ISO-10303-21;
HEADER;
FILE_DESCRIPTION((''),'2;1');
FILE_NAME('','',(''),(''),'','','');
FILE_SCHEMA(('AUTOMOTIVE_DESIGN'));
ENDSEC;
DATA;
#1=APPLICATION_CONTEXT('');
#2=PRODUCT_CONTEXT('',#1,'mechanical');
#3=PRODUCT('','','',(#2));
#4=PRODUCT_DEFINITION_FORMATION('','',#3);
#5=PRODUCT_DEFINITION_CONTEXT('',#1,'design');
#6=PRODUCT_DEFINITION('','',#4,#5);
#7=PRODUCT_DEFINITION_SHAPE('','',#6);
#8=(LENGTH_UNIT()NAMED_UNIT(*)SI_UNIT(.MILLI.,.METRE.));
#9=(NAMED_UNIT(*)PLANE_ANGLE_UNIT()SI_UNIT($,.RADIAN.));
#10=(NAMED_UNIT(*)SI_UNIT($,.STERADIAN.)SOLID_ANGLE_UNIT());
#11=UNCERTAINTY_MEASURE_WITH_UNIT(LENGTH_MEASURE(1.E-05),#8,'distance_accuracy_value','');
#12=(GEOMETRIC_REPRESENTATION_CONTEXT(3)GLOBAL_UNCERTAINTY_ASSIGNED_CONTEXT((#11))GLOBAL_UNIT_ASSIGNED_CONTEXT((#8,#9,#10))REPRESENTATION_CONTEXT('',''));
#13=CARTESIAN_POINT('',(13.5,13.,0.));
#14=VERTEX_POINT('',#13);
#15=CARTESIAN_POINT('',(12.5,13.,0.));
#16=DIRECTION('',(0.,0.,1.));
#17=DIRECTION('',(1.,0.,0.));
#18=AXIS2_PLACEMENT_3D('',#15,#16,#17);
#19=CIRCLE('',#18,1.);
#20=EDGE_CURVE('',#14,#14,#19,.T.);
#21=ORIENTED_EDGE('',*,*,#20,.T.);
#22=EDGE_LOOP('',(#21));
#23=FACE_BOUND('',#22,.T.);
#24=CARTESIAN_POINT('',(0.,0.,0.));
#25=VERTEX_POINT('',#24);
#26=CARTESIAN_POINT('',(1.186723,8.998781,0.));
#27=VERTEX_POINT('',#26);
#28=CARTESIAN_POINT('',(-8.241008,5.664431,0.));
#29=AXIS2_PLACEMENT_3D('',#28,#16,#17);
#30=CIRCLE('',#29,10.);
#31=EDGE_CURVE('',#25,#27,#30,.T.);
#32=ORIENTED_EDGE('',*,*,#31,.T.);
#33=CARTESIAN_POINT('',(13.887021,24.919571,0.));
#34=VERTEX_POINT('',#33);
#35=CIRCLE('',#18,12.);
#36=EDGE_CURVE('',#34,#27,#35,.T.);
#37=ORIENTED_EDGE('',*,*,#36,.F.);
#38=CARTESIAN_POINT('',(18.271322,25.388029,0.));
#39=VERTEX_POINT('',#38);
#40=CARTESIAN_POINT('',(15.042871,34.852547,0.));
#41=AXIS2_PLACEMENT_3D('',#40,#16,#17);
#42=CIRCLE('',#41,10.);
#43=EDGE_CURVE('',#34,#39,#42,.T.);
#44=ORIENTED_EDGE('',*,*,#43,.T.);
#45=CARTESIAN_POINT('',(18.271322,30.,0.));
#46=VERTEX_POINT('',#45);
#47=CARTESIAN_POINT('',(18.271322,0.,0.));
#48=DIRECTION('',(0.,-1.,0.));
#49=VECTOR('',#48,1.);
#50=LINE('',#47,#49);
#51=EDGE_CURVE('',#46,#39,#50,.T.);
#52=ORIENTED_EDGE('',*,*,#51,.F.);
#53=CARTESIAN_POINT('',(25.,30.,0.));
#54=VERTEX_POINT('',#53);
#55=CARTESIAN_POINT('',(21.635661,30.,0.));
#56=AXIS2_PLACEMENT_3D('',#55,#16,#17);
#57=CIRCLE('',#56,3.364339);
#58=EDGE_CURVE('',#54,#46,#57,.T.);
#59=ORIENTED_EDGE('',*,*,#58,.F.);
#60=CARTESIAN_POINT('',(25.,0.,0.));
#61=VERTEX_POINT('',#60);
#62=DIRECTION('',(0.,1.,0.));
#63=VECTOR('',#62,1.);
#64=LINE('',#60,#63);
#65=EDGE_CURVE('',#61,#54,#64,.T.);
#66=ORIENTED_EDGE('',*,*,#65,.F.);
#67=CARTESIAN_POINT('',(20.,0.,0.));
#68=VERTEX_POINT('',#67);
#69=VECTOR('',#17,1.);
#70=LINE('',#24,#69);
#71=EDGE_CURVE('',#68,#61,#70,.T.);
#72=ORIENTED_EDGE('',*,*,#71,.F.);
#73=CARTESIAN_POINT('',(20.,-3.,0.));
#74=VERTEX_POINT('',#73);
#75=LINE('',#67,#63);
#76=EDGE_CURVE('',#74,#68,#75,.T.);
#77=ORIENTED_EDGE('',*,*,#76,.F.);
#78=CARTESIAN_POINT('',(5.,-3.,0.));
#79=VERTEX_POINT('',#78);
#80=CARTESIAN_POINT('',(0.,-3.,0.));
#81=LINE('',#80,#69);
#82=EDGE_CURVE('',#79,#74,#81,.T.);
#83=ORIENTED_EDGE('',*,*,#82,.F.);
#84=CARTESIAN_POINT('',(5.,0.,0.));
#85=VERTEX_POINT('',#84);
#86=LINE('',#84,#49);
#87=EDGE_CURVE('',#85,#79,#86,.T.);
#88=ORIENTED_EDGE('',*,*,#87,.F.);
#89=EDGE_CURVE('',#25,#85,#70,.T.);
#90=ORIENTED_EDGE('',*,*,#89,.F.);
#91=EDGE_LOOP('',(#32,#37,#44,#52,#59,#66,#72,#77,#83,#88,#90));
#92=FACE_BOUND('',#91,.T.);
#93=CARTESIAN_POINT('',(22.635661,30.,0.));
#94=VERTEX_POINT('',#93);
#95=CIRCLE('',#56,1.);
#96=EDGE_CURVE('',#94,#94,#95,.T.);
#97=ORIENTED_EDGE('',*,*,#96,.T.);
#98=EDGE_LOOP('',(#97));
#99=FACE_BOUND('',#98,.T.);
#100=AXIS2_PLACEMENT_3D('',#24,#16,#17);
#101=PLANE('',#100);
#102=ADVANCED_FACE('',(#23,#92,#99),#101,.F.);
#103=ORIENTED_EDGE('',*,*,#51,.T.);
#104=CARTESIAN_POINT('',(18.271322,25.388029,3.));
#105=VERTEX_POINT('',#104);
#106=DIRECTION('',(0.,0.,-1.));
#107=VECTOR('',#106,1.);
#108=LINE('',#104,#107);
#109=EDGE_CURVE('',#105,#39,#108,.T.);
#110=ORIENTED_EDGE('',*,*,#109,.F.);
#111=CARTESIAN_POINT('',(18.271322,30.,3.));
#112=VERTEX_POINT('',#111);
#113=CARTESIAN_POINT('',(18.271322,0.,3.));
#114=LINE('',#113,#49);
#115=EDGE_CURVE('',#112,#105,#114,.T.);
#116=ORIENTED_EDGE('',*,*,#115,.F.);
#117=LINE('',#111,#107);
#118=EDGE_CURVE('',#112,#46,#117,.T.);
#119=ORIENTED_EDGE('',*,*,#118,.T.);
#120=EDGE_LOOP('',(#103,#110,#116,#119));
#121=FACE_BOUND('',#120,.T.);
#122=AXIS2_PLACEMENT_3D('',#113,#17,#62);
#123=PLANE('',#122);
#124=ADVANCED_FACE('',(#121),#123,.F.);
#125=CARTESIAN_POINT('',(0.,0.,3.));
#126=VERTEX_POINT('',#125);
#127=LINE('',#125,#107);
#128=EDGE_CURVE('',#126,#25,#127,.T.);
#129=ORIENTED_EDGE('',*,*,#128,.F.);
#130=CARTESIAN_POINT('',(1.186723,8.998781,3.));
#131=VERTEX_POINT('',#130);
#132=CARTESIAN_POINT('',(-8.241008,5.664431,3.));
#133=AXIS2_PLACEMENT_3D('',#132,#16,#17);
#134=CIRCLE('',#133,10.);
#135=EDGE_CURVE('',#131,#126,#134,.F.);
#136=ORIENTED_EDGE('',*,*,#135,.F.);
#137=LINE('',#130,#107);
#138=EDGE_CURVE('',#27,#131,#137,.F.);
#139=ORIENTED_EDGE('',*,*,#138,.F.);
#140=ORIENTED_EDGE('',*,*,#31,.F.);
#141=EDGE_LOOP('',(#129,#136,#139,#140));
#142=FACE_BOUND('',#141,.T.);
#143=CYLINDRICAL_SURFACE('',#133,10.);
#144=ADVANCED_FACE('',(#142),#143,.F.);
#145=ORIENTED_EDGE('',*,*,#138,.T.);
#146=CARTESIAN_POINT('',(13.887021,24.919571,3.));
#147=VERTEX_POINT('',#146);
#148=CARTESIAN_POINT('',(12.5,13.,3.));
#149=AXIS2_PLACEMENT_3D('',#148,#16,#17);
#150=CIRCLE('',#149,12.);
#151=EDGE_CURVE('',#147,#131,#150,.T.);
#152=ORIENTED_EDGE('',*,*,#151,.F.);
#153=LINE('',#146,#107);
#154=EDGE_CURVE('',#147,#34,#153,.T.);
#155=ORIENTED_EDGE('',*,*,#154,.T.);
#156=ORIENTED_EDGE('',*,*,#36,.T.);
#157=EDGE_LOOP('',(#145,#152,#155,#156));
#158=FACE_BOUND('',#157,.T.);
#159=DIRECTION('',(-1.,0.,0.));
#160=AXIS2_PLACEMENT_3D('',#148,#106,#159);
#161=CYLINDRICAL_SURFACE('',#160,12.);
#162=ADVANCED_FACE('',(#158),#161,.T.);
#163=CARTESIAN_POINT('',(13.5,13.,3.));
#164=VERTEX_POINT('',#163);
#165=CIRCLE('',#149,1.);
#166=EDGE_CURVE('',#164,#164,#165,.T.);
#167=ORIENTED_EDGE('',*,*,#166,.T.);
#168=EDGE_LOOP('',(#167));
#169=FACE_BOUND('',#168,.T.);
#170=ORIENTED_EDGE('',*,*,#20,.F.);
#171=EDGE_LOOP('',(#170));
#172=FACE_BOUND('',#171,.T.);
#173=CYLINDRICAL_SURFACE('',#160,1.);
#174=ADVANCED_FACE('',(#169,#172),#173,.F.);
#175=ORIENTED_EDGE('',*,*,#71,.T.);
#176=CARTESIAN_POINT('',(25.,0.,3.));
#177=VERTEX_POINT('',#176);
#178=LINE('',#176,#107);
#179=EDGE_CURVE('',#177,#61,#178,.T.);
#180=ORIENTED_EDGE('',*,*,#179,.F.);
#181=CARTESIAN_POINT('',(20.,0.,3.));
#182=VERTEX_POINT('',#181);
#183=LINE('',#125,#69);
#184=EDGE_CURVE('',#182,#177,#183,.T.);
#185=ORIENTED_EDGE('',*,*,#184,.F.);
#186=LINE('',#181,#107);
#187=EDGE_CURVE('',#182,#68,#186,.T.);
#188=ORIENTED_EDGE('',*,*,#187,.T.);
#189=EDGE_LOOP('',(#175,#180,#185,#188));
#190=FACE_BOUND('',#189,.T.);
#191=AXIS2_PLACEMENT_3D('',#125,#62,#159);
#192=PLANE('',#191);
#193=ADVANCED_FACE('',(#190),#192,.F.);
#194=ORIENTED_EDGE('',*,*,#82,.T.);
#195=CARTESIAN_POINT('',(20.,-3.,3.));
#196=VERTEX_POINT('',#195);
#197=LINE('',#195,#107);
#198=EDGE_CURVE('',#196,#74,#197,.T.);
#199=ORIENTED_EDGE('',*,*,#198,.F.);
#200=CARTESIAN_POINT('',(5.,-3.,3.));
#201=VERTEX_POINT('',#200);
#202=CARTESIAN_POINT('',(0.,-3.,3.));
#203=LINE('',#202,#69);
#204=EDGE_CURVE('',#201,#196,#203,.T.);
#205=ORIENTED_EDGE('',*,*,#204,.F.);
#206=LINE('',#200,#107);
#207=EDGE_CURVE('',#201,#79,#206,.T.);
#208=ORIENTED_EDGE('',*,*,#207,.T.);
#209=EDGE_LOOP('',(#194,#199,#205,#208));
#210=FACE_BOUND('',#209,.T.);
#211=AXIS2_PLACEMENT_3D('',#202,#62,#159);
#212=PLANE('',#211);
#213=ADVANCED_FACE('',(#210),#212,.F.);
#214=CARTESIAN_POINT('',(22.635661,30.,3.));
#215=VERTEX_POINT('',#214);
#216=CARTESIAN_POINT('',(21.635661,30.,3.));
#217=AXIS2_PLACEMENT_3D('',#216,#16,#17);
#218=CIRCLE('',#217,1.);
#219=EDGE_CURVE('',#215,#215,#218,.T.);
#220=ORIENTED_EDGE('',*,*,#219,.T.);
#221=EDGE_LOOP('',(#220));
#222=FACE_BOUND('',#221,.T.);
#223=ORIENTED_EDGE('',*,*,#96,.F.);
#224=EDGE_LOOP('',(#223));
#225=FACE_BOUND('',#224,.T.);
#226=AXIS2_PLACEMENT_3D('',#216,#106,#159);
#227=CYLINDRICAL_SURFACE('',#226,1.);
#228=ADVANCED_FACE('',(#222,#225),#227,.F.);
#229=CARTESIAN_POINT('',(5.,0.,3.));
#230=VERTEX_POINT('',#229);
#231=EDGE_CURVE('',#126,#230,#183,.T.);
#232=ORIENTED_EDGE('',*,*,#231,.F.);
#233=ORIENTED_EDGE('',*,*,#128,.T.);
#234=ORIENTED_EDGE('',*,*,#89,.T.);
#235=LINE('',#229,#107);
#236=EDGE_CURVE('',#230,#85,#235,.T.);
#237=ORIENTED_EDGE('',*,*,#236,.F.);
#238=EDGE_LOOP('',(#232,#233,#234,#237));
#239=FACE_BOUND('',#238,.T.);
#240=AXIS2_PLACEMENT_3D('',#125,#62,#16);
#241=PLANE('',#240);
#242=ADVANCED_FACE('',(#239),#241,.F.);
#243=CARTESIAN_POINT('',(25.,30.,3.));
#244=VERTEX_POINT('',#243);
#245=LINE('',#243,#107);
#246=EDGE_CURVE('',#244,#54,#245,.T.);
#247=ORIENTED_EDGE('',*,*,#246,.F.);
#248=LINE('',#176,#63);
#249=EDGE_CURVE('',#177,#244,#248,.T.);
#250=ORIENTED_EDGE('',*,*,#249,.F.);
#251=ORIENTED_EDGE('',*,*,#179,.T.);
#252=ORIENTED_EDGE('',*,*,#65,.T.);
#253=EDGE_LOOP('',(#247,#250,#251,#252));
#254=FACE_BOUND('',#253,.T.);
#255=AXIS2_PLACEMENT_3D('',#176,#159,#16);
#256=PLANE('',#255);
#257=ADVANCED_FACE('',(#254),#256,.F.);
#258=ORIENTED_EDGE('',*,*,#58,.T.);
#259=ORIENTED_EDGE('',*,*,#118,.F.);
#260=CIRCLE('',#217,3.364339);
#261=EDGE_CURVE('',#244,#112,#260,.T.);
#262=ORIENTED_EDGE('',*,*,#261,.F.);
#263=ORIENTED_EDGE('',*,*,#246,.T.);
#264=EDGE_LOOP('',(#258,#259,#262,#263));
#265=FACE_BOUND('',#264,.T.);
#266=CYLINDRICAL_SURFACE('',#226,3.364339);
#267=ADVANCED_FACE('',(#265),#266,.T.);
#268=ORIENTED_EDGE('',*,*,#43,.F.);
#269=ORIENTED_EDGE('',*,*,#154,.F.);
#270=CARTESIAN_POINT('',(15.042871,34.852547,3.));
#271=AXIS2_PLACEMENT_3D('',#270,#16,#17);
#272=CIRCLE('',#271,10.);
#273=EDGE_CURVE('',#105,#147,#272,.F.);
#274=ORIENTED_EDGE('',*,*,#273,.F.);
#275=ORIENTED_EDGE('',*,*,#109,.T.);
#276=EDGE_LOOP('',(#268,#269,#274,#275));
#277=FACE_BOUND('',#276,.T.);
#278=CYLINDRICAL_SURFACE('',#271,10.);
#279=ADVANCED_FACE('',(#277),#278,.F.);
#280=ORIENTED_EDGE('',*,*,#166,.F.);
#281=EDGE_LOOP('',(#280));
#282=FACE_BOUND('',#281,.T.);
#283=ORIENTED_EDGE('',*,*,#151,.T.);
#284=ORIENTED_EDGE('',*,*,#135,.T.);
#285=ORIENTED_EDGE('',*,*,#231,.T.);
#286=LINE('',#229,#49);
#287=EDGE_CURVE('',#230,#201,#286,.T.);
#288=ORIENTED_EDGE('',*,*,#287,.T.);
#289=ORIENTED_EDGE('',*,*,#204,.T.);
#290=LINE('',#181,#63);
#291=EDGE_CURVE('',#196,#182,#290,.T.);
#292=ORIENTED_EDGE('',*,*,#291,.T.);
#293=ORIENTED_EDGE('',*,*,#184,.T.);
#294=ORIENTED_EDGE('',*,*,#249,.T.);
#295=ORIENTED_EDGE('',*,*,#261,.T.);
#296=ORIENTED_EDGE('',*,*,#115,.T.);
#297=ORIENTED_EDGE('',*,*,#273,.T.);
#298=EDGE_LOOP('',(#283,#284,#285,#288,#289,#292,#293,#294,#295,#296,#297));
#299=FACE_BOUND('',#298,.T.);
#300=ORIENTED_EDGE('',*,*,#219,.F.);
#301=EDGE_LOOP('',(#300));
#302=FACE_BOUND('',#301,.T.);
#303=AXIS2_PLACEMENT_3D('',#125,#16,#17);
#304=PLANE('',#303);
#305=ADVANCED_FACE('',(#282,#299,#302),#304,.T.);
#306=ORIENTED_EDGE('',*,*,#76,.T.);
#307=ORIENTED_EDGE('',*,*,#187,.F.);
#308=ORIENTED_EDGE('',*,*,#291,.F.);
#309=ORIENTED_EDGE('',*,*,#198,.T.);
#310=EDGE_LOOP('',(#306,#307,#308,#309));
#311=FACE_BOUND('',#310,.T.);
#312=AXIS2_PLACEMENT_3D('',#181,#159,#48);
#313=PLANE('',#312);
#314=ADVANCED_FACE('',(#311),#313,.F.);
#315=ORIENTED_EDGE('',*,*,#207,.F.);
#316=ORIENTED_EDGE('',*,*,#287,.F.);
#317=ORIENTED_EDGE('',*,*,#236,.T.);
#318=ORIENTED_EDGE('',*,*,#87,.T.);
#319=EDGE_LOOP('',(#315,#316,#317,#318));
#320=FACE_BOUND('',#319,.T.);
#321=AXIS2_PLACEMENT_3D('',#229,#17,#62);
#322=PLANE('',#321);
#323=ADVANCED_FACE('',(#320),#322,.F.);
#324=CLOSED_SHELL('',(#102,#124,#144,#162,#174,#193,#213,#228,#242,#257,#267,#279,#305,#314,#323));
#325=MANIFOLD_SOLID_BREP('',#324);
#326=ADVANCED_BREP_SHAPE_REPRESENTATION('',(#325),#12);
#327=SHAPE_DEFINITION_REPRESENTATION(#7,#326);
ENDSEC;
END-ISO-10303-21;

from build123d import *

# Parameters (mm, degrees)
SKETCH1_R           = 1
BOSS_EXTRUDE1_DEPTH = 3
FILLET2_R           = 10


with BuildPart() as part:
    # Sketch1 → Boss-Extrude1 (new body)
    with BuildSketch(Plane.XY):
        with BuildLine():
            Line((0, 0), (5, 0))
            Line((5, 0), (5, -3))
            Line((5, -3), (20, -3))
            Line((20, -3), (20, 0))
            Line((20, 0), (25, 0))
            Line((25, 0), (25, 30))
            ThreePointArc((25, 30), (21.635660943, 33.364339057), (18.271321885, 30))
            Line((18.271321885, 30), (18.271321885, 25.388028695))
            Line((18.271321885, 25.388028695), (17.277972917, 24.007768839))
            ThreePointArc((17.277972917, 24.007768839), (2.760122096, 20.009620418), (3.579412381, 4.97359878))
            Line((3.579412381, 4.97359878), (0, 0))
        make_face()
        with Locations((12.5, 13)):
            Circle(SKETCH1_R, mode=Mode.SUBTRACT)
        with Locations((21.635660943, 30)):
            Circle(SKETCH1_R, mode=Mode.SUBTRACT)
    extrude(amount=BOSS_EXTRUDE1_DEPTH)

    # Fillet2
    # the kernel refuses this fillet: 10 mm, written as the material it adds along each edge
    with BuildSketch(Plane(origin=(3.579412381, 4.97359878, 0), x_dir=(-0.5841350348464551, -0.8116564920364591, 0), z_dir=(0, 0, 1))) as fillet2_piece_1_section:
        with BuildLine():
            CenterArc((6.344003322, -9.997660671), FILLET2_R, 91.239343662, 53.979959966)
            Line((-1.869411105, -4.293291867), (-2.033679393, -4.179204491))
            ThreePointArc((-2.033679393, -4.179204491), (-0.906628796, -2.158871285), (-0.19542514, 0.042532512))
            Line((-0.19542514, 0.042532512), (0, 0.2))
            ThreePointArc((0, 0.2), (3.063856958, 0.2), (6.123388127, 0.199953213))
            Line((6.123388127, 0.199953213), (6.127713915, 0))
        make_face()
    fillet2_piece_1 = extrude(amount=3, mode=Mode.PRIVATE)
    fillet2_piece_1 = split(fillet2_piece_1, bisect_by=Plane(origin=(2.134897735, 0, 1.5), z_dir=(0, 1, 0)), keep=Keep.TOP, mode=Mode.PRIVATE)
    add(fillet2_piece_1)
    with BuildSketch(Plane(origin=(17.277972917, 24.007768839, 0), x_dir=(0.5841350348464545, 0.8116564920364596, 0), z_dir=(0, 0, 1))) as fillet2_piece_2:
        with BuildLine():
            CenterArc((7.496633226, 8.148949762), FILLET2_R, 209.104536821, 25.472441877)
            Line((-1.240703884, 3.284904099), (-1.415450626, 3.187623185))
            ThreePointArc((-1.415450626, 3.187623185), (-0.686649014, 1.617411734), (-0.19542514, -0.042532512))
            Line((-0.19542514, -0.042532512), (0, -0.2))
            ThreePointArc((0, -0.2), (0.850273404, -0.2), (1.584625079, -0.162978995))
            Line((1.584625079, -0.162978995), (1.700546807, 0))
        make_face()
    extrude(amount=3)


solid = part.part
